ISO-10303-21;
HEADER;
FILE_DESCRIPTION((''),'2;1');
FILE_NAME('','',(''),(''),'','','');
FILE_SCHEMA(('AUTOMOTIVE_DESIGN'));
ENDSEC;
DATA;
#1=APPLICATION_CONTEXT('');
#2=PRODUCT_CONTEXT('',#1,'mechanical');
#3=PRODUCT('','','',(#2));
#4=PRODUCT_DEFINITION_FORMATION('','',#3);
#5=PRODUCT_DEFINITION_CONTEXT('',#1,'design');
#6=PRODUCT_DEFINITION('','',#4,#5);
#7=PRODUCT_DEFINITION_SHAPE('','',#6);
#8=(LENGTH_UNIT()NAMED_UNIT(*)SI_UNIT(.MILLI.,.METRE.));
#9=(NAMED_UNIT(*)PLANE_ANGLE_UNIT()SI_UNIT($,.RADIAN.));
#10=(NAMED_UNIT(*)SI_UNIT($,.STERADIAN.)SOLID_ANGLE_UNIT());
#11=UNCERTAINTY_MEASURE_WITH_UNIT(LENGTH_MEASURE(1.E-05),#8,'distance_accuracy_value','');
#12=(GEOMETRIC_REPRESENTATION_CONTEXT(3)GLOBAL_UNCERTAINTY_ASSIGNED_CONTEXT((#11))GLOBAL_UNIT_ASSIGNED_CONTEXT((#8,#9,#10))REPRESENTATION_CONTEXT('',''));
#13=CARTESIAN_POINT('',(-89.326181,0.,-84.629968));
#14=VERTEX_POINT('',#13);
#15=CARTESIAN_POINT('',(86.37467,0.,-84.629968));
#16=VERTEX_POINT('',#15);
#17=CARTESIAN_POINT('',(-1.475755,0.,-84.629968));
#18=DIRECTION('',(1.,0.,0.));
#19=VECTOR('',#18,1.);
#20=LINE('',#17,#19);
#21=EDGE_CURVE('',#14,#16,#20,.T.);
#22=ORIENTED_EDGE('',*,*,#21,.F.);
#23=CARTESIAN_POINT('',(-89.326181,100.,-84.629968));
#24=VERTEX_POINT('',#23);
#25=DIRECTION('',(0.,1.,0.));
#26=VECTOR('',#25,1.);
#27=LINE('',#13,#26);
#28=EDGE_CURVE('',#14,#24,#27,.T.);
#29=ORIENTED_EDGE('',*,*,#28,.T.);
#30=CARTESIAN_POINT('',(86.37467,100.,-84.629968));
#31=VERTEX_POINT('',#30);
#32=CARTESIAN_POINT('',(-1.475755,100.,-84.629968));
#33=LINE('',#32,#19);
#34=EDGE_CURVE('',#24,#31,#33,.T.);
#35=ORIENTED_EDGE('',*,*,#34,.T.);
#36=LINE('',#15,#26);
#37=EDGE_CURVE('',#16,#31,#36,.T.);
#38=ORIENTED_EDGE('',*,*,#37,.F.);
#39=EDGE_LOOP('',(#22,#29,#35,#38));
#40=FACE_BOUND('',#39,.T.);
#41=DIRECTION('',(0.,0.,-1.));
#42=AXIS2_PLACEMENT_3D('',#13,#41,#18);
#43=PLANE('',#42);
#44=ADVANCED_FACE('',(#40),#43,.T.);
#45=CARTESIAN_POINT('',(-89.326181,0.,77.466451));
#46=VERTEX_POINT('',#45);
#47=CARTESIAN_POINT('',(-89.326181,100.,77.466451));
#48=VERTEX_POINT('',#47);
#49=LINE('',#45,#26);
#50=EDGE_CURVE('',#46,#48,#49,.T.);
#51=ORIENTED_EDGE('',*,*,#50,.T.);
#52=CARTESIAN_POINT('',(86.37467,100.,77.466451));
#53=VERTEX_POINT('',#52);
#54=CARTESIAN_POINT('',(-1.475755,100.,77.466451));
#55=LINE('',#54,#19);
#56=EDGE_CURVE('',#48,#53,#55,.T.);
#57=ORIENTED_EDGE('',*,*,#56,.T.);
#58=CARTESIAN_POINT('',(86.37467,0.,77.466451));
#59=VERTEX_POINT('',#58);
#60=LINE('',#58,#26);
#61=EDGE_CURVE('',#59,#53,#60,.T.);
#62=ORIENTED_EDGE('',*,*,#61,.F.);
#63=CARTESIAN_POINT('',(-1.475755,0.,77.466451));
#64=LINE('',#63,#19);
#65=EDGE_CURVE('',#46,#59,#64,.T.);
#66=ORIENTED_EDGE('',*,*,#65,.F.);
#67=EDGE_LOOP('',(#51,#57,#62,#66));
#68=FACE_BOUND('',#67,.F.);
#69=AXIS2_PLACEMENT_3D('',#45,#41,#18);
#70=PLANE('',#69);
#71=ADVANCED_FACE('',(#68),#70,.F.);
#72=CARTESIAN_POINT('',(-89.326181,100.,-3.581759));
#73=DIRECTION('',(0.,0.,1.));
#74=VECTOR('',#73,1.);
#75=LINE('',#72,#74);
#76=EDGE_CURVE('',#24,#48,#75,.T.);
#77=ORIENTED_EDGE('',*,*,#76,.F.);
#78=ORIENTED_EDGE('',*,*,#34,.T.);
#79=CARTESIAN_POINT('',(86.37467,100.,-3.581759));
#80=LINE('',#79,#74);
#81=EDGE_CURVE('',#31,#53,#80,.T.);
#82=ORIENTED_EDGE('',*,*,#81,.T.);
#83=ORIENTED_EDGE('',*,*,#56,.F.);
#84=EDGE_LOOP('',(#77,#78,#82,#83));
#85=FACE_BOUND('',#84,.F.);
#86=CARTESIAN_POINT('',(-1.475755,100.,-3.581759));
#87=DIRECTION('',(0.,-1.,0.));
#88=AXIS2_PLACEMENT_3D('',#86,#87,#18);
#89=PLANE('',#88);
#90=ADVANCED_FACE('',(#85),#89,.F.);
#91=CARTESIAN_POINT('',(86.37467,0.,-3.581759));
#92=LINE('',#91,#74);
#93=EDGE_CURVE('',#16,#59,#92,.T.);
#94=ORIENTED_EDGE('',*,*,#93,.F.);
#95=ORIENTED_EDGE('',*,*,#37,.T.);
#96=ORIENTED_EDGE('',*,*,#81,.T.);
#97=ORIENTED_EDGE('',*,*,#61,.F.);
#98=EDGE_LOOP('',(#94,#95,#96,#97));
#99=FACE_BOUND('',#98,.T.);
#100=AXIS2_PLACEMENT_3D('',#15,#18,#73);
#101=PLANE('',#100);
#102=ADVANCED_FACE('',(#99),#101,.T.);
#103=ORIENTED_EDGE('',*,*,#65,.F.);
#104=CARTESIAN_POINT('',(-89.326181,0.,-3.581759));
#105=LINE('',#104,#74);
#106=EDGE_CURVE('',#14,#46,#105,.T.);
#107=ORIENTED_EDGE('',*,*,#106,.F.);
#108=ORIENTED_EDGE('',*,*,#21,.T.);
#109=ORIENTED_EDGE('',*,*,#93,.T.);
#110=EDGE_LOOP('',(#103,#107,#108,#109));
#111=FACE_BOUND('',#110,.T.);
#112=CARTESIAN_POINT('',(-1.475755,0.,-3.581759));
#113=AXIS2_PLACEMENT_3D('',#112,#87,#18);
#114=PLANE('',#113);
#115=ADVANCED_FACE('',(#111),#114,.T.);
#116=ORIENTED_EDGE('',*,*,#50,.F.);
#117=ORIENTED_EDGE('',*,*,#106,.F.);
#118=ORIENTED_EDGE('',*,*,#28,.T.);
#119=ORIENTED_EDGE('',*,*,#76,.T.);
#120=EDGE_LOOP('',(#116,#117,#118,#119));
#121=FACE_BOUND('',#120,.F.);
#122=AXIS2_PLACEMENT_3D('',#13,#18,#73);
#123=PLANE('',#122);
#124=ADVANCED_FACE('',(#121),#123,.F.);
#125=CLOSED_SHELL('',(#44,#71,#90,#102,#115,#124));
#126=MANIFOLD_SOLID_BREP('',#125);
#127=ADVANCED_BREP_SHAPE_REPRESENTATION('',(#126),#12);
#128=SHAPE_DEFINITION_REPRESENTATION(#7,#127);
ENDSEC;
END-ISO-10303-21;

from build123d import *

# Parameters (mm, degrees)
F0_W     = 175.7008507848
F0_H     = 162.0964184403
F1_DEPTH = 100


# Not quite as in the source:
# - a feature names something its author has since deleted; it is built from what else it names


with BuildPart() as f1:
    # F0 (on Front) → F1 (new body)
    with BuildSketch(Plane.XZ):
        with Locations((-1.4757551253, -3.5817585886)):
            Rectangle(F0_W, F0_H)
    extrude(amount=-F1_DEPTH)


solid = f1.part
